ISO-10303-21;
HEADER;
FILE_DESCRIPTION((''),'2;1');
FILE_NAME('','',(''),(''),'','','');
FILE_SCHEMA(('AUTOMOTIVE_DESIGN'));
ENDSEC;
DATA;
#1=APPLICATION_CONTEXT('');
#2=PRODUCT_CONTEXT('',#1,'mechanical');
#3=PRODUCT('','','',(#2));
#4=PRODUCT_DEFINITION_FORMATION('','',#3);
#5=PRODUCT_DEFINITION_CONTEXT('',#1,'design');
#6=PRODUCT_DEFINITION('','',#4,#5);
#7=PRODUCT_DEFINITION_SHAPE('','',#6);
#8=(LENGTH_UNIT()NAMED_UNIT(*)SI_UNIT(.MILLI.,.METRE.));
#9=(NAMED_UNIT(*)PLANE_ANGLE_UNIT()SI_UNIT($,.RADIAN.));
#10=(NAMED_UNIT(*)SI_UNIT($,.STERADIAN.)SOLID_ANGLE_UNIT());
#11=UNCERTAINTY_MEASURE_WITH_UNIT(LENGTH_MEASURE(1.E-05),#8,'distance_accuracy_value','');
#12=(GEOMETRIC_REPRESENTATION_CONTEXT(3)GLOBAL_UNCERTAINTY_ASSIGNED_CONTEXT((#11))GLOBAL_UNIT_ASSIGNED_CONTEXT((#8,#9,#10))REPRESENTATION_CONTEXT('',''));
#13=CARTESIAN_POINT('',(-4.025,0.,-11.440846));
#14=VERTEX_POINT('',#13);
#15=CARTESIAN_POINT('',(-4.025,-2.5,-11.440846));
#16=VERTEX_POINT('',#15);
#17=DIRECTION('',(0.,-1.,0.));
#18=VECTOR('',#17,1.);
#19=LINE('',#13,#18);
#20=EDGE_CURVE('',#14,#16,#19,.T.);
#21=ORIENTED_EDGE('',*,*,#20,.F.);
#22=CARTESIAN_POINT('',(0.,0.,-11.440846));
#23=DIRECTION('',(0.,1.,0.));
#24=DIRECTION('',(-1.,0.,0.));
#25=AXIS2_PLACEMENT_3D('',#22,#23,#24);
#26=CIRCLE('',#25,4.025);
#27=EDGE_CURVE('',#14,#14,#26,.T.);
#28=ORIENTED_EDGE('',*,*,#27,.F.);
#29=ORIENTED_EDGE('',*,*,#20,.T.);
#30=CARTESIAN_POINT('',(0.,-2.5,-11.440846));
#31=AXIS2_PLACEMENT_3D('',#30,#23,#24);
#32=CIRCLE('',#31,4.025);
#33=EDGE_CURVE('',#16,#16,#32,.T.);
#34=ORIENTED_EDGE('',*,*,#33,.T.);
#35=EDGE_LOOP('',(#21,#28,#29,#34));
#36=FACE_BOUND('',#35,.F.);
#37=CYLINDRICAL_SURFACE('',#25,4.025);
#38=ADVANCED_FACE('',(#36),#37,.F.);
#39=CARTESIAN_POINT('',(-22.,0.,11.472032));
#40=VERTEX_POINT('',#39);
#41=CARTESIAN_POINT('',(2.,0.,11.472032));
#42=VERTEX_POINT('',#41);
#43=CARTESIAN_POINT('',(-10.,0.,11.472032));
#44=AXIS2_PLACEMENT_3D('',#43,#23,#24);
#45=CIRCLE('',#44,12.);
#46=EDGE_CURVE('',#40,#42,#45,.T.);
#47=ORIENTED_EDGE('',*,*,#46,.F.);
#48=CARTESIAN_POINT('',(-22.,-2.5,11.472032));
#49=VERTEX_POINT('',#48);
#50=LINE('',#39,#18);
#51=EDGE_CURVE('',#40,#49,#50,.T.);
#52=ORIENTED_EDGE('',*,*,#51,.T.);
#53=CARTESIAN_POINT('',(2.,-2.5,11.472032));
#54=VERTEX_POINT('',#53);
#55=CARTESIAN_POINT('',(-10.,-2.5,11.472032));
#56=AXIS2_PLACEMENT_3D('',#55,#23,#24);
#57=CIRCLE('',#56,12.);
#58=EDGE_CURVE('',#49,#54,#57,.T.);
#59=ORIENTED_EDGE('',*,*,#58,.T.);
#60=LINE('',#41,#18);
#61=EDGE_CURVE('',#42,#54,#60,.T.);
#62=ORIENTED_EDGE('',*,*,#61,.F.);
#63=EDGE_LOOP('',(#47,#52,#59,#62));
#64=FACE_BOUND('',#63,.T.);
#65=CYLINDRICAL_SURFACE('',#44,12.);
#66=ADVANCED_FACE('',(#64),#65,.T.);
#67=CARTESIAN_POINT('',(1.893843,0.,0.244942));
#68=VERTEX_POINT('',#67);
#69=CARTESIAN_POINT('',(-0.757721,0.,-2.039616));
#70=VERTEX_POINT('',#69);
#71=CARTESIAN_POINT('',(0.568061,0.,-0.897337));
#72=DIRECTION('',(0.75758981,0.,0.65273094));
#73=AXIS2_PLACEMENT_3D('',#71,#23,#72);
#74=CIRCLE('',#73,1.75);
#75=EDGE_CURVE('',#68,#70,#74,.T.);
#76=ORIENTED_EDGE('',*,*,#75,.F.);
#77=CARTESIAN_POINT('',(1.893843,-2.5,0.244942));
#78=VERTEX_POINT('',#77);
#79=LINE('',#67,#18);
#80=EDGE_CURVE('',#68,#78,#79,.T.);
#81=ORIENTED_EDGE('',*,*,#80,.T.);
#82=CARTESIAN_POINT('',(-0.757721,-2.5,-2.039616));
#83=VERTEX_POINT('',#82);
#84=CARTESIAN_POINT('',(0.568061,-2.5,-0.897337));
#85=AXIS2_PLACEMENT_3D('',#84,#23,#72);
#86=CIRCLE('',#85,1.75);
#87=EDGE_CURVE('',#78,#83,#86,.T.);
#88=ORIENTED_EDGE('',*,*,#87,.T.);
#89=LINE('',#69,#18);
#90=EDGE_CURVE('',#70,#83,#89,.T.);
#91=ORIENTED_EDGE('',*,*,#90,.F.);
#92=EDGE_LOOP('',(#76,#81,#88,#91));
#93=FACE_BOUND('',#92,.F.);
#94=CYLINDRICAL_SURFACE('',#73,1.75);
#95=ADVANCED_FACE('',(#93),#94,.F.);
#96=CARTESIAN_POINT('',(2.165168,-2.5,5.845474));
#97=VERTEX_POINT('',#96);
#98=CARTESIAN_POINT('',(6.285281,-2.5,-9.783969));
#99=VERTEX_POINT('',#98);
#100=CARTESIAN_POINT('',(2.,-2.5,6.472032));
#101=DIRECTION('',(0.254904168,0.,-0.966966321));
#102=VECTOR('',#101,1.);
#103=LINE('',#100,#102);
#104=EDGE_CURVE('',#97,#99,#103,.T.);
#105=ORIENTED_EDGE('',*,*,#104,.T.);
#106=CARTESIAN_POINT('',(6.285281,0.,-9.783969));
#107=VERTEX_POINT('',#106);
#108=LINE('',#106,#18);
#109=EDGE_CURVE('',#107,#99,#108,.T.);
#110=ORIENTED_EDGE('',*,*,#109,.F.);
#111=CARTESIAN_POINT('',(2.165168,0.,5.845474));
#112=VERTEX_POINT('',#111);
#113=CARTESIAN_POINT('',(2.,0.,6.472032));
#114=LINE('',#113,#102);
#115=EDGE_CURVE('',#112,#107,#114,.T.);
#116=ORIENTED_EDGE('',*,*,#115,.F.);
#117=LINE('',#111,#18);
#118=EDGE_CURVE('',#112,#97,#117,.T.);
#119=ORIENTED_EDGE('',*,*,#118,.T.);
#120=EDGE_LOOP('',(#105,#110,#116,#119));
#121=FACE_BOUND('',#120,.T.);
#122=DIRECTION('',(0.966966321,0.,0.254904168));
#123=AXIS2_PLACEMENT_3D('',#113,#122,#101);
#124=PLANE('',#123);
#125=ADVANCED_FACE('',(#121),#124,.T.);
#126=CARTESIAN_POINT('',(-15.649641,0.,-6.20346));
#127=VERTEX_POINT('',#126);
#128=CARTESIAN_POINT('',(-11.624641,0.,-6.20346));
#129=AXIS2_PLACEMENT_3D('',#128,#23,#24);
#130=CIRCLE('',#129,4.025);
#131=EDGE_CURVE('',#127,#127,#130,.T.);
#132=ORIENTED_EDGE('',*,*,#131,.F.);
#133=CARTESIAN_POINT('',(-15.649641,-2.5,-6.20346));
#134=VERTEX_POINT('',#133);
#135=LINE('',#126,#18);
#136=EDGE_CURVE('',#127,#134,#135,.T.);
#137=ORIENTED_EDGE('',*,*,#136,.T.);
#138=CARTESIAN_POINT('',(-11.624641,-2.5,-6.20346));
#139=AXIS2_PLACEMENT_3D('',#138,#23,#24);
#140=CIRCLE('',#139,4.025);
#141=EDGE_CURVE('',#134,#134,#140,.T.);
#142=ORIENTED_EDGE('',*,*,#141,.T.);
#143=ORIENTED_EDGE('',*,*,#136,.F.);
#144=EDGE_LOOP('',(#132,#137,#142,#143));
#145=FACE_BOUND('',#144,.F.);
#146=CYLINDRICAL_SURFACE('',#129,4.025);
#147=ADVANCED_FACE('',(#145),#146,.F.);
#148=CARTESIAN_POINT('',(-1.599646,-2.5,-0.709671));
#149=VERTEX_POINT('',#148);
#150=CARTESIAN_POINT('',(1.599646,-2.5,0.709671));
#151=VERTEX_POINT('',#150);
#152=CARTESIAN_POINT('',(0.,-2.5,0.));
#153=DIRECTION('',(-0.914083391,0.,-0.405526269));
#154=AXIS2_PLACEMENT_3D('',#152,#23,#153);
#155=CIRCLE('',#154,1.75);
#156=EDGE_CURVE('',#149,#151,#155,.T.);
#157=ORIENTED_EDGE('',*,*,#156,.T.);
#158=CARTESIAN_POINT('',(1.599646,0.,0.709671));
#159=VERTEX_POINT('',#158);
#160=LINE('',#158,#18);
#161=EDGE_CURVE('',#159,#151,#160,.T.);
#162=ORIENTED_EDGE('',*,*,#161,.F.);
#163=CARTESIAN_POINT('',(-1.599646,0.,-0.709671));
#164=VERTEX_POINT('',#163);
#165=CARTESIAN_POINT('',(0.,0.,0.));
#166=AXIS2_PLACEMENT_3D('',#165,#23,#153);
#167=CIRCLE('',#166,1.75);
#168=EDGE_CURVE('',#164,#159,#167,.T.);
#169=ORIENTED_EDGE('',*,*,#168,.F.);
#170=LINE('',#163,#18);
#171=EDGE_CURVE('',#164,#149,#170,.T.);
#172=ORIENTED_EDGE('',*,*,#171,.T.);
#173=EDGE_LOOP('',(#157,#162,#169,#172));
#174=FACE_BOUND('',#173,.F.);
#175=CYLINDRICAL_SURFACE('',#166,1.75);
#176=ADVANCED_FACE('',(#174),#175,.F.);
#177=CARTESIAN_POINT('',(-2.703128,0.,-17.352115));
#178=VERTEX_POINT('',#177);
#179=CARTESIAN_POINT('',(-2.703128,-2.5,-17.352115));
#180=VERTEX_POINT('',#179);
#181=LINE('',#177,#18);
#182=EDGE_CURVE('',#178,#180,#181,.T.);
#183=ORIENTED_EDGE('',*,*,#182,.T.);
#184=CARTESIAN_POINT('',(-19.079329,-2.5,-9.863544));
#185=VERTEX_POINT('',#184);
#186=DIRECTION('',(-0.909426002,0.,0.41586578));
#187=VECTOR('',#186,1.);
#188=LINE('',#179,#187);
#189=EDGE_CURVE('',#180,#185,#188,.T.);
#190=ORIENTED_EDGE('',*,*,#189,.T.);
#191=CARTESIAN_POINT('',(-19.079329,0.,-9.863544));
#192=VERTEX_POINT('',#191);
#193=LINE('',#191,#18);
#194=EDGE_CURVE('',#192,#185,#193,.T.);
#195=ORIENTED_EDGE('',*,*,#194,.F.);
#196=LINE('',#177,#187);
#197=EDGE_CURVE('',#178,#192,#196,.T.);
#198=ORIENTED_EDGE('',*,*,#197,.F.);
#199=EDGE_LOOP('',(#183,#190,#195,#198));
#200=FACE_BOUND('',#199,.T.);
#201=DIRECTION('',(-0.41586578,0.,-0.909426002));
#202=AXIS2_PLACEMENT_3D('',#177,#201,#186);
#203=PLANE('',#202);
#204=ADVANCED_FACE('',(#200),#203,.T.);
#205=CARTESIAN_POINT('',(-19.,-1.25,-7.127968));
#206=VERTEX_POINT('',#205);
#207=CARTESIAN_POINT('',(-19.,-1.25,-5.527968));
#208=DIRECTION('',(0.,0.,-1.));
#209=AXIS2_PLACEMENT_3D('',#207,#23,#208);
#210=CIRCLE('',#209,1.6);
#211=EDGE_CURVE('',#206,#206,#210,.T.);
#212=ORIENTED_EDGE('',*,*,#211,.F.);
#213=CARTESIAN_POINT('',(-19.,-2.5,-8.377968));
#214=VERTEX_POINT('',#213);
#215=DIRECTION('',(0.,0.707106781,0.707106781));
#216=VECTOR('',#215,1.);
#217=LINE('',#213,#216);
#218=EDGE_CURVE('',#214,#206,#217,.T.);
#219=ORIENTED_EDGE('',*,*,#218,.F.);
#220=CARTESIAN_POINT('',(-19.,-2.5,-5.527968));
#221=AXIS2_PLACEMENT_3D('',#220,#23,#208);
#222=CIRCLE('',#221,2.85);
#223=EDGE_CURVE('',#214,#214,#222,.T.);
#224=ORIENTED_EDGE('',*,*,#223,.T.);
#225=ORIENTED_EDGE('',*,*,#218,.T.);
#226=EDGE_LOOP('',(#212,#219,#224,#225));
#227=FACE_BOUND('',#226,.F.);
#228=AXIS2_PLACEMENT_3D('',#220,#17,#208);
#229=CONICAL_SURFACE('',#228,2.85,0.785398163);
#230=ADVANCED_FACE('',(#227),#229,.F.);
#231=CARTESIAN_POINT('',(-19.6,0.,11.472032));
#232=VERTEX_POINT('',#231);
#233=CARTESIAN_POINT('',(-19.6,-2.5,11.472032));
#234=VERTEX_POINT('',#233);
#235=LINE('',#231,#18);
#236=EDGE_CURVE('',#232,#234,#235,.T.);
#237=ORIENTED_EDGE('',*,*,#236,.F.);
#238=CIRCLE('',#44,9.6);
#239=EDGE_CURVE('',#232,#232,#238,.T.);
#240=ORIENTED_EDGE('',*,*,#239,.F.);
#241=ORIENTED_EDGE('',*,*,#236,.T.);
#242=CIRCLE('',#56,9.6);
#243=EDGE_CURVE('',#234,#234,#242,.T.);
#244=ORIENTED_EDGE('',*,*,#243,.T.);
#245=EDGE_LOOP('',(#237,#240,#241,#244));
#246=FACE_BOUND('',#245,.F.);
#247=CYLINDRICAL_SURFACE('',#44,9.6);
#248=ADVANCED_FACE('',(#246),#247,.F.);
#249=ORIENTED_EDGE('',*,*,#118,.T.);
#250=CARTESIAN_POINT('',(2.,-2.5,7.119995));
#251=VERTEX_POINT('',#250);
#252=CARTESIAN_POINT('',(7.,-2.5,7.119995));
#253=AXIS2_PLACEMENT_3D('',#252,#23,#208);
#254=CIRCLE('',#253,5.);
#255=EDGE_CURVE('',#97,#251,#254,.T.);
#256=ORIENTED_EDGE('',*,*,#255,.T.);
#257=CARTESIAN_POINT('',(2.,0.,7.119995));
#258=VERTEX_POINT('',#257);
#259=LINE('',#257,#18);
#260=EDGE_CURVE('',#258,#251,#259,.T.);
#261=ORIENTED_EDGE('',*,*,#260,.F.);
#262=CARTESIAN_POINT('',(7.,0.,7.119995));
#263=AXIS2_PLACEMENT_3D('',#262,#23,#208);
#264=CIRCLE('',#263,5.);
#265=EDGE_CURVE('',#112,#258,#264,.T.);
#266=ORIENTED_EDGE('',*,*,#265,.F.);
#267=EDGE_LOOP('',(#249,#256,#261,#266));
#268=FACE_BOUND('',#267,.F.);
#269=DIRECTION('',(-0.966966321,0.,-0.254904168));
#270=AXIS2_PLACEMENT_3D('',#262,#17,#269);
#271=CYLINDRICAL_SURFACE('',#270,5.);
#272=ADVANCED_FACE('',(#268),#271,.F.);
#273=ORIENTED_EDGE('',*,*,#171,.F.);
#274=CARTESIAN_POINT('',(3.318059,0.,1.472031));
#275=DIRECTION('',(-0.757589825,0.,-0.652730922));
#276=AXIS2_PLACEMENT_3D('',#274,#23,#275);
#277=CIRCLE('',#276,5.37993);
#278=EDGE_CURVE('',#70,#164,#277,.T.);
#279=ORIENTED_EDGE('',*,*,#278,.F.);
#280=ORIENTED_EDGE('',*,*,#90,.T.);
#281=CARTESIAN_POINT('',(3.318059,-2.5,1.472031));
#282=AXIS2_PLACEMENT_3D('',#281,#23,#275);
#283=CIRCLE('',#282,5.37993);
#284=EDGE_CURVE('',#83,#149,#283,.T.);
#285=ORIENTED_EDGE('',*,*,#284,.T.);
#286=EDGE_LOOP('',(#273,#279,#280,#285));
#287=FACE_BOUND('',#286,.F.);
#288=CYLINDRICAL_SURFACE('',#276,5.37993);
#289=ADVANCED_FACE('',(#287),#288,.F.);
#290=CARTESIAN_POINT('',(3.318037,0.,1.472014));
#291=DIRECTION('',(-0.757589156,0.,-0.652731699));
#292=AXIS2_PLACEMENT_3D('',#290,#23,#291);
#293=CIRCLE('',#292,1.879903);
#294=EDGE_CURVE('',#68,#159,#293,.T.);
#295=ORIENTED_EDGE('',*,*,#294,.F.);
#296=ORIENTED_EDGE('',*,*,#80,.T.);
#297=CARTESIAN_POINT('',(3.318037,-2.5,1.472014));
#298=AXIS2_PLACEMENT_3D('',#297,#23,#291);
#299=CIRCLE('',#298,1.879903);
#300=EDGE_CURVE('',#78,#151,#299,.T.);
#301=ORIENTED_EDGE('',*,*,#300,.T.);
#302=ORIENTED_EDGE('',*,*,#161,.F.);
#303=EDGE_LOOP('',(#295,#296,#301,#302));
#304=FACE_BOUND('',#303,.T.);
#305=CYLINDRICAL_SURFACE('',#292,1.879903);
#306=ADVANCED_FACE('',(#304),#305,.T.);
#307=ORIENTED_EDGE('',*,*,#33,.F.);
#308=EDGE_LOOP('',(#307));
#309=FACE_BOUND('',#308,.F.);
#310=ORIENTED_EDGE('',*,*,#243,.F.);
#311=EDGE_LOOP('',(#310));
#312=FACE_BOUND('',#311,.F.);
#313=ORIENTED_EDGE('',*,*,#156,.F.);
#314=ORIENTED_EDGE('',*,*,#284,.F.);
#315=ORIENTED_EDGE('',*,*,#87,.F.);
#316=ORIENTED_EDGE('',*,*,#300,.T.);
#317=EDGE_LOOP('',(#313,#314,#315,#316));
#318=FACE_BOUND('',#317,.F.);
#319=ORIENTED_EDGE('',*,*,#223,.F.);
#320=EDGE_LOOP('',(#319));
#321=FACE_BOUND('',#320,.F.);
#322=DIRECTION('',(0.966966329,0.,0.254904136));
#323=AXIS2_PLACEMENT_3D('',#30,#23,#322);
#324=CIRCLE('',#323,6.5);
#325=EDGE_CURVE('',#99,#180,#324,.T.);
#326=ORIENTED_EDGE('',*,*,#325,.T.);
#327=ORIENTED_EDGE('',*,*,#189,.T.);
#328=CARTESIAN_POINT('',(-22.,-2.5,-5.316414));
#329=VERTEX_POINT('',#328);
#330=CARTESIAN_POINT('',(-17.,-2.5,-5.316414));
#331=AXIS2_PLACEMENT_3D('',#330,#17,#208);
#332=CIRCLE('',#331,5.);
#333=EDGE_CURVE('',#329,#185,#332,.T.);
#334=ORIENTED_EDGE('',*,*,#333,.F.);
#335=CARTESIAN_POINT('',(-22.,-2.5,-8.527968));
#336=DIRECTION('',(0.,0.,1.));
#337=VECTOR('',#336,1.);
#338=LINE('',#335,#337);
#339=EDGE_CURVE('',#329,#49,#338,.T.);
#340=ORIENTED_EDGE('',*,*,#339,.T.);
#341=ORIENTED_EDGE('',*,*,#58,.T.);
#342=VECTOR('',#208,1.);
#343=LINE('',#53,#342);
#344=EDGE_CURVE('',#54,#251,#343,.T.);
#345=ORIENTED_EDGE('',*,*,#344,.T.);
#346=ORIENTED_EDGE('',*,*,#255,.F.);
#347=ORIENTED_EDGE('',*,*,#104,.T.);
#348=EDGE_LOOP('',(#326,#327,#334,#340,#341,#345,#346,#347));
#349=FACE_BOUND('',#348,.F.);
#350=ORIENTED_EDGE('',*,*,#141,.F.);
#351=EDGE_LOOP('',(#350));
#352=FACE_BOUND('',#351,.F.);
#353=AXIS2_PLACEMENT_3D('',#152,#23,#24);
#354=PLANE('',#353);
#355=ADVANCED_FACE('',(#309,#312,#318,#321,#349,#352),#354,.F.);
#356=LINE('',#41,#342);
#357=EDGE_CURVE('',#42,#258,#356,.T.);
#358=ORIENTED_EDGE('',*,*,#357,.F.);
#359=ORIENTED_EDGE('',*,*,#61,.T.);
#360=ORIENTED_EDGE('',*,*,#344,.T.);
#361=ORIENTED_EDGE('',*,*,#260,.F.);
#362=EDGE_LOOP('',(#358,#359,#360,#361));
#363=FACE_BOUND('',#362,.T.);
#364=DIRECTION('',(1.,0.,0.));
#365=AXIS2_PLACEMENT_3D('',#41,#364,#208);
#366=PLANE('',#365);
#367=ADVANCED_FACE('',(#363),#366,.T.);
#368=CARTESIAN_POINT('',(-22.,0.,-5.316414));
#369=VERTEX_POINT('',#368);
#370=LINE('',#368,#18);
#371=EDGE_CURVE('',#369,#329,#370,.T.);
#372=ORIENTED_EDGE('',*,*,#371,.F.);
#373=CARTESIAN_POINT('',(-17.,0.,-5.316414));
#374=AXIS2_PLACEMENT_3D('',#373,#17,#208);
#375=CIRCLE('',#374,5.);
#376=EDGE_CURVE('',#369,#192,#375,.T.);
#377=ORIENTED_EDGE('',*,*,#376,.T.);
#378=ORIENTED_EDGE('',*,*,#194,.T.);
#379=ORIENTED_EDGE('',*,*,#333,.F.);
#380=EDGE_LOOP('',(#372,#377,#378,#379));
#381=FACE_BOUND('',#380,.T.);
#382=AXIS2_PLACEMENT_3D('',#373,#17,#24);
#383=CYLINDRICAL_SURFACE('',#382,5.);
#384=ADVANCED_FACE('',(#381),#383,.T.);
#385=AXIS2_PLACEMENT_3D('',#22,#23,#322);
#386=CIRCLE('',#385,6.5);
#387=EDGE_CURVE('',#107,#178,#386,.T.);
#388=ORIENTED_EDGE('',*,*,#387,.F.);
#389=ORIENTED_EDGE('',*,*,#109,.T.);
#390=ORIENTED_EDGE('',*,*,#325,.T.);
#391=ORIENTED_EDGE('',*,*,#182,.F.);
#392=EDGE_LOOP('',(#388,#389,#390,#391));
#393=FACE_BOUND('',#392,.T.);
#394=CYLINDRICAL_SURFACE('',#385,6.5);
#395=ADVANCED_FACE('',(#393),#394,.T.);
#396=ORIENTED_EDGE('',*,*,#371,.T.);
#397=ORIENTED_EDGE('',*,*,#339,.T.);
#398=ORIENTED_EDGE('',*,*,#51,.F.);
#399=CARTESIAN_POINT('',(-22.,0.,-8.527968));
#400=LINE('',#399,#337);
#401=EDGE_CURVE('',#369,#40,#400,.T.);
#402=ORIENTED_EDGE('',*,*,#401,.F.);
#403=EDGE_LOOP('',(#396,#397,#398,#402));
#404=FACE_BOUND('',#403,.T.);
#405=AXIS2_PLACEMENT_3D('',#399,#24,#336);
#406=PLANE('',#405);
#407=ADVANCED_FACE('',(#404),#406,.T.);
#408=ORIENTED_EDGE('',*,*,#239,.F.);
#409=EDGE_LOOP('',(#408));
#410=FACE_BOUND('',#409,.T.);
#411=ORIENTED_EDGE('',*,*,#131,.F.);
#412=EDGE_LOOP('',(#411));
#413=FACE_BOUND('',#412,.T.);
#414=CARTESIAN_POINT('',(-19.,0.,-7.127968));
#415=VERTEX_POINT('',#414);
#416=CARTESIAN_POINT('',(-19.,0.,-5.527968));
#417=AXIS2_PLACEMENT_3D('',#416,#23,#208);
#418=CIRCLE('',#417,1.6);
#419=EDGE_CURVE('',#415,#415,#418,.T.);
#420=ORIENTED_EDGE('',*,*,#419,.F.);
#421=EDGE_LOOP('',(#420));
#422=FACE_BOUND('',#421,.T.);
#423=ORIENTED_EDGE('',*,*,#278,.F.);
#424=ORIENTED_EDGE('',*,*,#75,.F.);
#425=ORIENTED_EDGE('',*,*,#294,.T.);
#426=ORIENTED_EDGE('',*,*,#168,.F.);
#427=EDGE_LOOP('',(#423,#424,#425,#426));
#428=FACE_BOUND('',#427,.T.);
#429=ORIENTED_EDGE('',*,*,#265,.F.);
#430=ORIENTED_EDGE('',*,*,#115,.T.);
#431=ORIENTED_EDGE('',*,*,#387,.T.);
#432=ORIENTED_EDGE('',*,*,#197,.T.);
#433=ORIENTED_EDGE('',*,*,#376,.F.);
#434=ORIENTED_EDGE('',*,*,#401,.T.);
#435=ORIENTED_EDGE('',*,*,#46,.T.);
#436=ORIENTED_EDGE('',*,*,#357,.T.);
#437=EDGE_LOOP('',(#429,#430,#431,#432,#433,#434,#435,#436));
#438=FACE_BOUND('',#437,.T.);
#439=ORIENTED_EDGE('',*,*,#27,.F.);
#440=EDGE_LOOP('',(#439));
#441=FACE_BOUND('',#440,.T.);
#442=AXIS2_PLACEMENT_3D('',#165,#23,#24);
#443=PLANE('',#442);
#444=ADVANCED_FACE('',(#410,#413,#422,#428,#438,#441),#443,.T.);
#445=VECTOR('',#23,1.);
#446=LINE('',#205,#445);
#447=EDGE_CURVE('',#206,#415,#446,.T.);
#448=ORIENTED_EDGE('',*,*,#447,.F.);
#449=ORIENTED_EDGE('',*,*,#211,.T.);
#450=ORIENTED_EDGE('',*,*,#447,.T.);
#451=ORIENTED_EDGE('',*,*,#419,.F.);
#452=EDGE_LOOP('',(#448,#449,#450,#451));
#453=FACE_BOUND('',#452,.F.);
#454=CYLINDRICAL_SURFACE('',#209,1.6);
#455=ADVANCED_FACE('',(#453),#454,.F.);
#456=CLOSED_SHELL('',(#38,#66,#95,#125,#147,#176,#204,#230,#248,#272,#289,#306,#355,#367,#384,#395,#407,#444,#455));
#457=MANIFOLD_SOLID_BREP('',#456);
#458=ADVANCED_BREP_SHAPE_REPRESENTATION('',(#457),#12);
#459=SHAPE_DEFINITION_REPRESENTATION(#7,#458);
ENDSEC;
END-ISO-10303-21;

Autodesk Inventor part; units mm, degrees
ref_plane "YZ Plane" through (0, 0, 0) normal (1, 0, 0) x (0, 1, 0)
ref_plane "XZ Plane" through (0, 0, 0) normal (0, 1, 0) x (-1, 0, 0)
ref_plane "XY Plane" through (0, 0, 0) normal (0, 0, 1) x (1, 0, 0)
sketch "Sketch1" plane through (0, 0, 0) normal (0, 1, 0) x (-1, 0, 0)
  circle A0 centre (0, 0) radius 1.6
  circle A1 centre (10, 11.472032) radius 12
  line L0 (0, 0) -> (10, 11.472032) construction
  line L1 (0, 0) -> (4, 0) construction
  circle A2 centre (0, 0) radius 4
  circle A3 centre (0, -11.440846) radius 6.5
  line L2 (10, 11.472032) -> (0, -11.440846) construction
  line L3 (0, 0) -> (0, -11.440846) construction
  line L4 (0, 0) -> (0, -4) construction
  line L5 (22, 11.472032) -> (22, -8.527968)
  line L6 (22, -8.527968) -> (2.703128, -17.352115)
  line L7 (-2, 11.472032) -> (-2, 6.472032)
  line L8 (-2, 6.472032) -> (-6.285281, -9.783969)
  circle A4 centre (10, 11.472032) radius 9.6
  line L9 (10, 11.472032) -> (17.5, 11.472032) construction
  circle A5 centre (17.5, 11.472032) radius 1.075
  circle A6 centre (6.25, 17.967223) radius 1.075
  circle A7 centre (6.25, 4.976842) radius 1.075
  circle A8 centre (10, 11.472032) radius 6.1
  circle A9 centre (0, -11.440846) radius 4.025
  circle A10 centre (10, 11.472032) radius 10
  circle A11 centre (0, -11.440846) radius 5
  circle A12 centre (11.624641, -6.20346) radius 7.75
  circle A13 centre (11.624641, -6.20346) radius 4.025
  circle A14 centre (19, -5.527968) radius 1.6
  dimension "d5" = 8
  dimension "d0" = 3.2
  dimension "d1" = 24
  dimension "d2" = 4
  dimension "d4" = 10
  dimension "d6" = 13
  dimension "d7" = 25
  dimension "d8" = 17.5
  dimension "d12" = 0
  dimension "d13" = 20
  dimension "d14" = 5
  dimension "d17" = 19.2
  dimension "d19" = 7.5
  dimension "d20" = 2.15
  dimension "d23" = 360
  dimension "d25" = 12.2
  dimension "d26" = 8.05
  dimension "d38" = 20
  dimension "d39" = 10
  dimension "d40" = 15.5
  dimension "d41" = 8.05
  dimension "d42" = 3.2
  dimension "d43" = 3
  dimension "d44" = 3
sketch "Sketch1 outline for Extrusion1" plane through (0, 0, 0) normal (0, 1, 0) x (-1, 0, 0)
  line L0 (-2, 11.472032) -> (-2, 6.472032)
  line L1 (-2, 6.472032) -> (-6.285281, -9.783969)
  arc A0 (-6.285281, -9.783969) -> (2.703128, -17.352115) centre (0, -11.440846) ccw
  line L2 (2.703128, -17.352115) -> (22, -8.527968)
  line L3 (22, -8.527968) -> (22, 11.472032)
  arc A1 (22, 11.472032) -> (-2, 11.472032) centre (10, 11.472032) ccw
  circle A2 centre (0, -11.440846) radius 4.025
  circle A3 centre (11.624641, -6.20346) radius 4.025
  circle A4 centre (10, 11.472032) radius 9.6
extrude "Extrusion1" add sketch "Sketch1 outline for Extrusion1" against normal blind 2.5
fillet "Fillet1" radius 5 2 edges at (-22, -1.25, -8.528) (2, -1.25, 6.472)
sketch "Sketch2" plane through (0, -2.5, 0) normal (0, -1, 0) x (1, 0, 0)
  point P0 (0, 0)
  point P1 (-19, -5.527968)
hole "Hole3" at (-19, -2.5, -5.527968) direction (0, 1, 0) diameter 3.2 end through all countersink diameter 5.7 countersink angle 90
sketch "Sketch3" plane through (0, 0, 0) normal (0, 1, 0) x (1, 0, 0)
  circle A0 centre (0, 0) radius 1.75 construction
  line L0 (2, -1.472032) -> (3.318061, -1.472032) construction
  line L1 (6.285281, 9.783969) -> (2.165168, -5.845474)
  arc A1 (0.568061, 0.897337) -> (0, 0) centre (3.318061, -1.472032) ccw construction
  arc A2 (-0.757721, 2.039616) -> (-1.599646, 0.709671) centre (3.318061, -1.472032) ccw
  arc A3 (1.893843, -0.244942) -> (1.599646, -0.709671) centre (3.318061, -1.472032) ccw
  arc A4 (1.893843, -0.244942) -> (-0.757721, 2.039616) centre (0.568061, 0.897337) ccw
  arc A5 (-1.599646, 0.709671) -> (1.599646, -0.709671) centre (0, 0) ccw
  line L2 (2, -1.472032) -> (2, -6.472032) construction
  point P0 (2, -6.472032)
  dimension "d68" = 2.75
  dimension "d69" = 5
extrude "Extrusion3" cut sketch "Sketch3" against normal blind 2.5
properties part number "Dribbler Bracket B"
